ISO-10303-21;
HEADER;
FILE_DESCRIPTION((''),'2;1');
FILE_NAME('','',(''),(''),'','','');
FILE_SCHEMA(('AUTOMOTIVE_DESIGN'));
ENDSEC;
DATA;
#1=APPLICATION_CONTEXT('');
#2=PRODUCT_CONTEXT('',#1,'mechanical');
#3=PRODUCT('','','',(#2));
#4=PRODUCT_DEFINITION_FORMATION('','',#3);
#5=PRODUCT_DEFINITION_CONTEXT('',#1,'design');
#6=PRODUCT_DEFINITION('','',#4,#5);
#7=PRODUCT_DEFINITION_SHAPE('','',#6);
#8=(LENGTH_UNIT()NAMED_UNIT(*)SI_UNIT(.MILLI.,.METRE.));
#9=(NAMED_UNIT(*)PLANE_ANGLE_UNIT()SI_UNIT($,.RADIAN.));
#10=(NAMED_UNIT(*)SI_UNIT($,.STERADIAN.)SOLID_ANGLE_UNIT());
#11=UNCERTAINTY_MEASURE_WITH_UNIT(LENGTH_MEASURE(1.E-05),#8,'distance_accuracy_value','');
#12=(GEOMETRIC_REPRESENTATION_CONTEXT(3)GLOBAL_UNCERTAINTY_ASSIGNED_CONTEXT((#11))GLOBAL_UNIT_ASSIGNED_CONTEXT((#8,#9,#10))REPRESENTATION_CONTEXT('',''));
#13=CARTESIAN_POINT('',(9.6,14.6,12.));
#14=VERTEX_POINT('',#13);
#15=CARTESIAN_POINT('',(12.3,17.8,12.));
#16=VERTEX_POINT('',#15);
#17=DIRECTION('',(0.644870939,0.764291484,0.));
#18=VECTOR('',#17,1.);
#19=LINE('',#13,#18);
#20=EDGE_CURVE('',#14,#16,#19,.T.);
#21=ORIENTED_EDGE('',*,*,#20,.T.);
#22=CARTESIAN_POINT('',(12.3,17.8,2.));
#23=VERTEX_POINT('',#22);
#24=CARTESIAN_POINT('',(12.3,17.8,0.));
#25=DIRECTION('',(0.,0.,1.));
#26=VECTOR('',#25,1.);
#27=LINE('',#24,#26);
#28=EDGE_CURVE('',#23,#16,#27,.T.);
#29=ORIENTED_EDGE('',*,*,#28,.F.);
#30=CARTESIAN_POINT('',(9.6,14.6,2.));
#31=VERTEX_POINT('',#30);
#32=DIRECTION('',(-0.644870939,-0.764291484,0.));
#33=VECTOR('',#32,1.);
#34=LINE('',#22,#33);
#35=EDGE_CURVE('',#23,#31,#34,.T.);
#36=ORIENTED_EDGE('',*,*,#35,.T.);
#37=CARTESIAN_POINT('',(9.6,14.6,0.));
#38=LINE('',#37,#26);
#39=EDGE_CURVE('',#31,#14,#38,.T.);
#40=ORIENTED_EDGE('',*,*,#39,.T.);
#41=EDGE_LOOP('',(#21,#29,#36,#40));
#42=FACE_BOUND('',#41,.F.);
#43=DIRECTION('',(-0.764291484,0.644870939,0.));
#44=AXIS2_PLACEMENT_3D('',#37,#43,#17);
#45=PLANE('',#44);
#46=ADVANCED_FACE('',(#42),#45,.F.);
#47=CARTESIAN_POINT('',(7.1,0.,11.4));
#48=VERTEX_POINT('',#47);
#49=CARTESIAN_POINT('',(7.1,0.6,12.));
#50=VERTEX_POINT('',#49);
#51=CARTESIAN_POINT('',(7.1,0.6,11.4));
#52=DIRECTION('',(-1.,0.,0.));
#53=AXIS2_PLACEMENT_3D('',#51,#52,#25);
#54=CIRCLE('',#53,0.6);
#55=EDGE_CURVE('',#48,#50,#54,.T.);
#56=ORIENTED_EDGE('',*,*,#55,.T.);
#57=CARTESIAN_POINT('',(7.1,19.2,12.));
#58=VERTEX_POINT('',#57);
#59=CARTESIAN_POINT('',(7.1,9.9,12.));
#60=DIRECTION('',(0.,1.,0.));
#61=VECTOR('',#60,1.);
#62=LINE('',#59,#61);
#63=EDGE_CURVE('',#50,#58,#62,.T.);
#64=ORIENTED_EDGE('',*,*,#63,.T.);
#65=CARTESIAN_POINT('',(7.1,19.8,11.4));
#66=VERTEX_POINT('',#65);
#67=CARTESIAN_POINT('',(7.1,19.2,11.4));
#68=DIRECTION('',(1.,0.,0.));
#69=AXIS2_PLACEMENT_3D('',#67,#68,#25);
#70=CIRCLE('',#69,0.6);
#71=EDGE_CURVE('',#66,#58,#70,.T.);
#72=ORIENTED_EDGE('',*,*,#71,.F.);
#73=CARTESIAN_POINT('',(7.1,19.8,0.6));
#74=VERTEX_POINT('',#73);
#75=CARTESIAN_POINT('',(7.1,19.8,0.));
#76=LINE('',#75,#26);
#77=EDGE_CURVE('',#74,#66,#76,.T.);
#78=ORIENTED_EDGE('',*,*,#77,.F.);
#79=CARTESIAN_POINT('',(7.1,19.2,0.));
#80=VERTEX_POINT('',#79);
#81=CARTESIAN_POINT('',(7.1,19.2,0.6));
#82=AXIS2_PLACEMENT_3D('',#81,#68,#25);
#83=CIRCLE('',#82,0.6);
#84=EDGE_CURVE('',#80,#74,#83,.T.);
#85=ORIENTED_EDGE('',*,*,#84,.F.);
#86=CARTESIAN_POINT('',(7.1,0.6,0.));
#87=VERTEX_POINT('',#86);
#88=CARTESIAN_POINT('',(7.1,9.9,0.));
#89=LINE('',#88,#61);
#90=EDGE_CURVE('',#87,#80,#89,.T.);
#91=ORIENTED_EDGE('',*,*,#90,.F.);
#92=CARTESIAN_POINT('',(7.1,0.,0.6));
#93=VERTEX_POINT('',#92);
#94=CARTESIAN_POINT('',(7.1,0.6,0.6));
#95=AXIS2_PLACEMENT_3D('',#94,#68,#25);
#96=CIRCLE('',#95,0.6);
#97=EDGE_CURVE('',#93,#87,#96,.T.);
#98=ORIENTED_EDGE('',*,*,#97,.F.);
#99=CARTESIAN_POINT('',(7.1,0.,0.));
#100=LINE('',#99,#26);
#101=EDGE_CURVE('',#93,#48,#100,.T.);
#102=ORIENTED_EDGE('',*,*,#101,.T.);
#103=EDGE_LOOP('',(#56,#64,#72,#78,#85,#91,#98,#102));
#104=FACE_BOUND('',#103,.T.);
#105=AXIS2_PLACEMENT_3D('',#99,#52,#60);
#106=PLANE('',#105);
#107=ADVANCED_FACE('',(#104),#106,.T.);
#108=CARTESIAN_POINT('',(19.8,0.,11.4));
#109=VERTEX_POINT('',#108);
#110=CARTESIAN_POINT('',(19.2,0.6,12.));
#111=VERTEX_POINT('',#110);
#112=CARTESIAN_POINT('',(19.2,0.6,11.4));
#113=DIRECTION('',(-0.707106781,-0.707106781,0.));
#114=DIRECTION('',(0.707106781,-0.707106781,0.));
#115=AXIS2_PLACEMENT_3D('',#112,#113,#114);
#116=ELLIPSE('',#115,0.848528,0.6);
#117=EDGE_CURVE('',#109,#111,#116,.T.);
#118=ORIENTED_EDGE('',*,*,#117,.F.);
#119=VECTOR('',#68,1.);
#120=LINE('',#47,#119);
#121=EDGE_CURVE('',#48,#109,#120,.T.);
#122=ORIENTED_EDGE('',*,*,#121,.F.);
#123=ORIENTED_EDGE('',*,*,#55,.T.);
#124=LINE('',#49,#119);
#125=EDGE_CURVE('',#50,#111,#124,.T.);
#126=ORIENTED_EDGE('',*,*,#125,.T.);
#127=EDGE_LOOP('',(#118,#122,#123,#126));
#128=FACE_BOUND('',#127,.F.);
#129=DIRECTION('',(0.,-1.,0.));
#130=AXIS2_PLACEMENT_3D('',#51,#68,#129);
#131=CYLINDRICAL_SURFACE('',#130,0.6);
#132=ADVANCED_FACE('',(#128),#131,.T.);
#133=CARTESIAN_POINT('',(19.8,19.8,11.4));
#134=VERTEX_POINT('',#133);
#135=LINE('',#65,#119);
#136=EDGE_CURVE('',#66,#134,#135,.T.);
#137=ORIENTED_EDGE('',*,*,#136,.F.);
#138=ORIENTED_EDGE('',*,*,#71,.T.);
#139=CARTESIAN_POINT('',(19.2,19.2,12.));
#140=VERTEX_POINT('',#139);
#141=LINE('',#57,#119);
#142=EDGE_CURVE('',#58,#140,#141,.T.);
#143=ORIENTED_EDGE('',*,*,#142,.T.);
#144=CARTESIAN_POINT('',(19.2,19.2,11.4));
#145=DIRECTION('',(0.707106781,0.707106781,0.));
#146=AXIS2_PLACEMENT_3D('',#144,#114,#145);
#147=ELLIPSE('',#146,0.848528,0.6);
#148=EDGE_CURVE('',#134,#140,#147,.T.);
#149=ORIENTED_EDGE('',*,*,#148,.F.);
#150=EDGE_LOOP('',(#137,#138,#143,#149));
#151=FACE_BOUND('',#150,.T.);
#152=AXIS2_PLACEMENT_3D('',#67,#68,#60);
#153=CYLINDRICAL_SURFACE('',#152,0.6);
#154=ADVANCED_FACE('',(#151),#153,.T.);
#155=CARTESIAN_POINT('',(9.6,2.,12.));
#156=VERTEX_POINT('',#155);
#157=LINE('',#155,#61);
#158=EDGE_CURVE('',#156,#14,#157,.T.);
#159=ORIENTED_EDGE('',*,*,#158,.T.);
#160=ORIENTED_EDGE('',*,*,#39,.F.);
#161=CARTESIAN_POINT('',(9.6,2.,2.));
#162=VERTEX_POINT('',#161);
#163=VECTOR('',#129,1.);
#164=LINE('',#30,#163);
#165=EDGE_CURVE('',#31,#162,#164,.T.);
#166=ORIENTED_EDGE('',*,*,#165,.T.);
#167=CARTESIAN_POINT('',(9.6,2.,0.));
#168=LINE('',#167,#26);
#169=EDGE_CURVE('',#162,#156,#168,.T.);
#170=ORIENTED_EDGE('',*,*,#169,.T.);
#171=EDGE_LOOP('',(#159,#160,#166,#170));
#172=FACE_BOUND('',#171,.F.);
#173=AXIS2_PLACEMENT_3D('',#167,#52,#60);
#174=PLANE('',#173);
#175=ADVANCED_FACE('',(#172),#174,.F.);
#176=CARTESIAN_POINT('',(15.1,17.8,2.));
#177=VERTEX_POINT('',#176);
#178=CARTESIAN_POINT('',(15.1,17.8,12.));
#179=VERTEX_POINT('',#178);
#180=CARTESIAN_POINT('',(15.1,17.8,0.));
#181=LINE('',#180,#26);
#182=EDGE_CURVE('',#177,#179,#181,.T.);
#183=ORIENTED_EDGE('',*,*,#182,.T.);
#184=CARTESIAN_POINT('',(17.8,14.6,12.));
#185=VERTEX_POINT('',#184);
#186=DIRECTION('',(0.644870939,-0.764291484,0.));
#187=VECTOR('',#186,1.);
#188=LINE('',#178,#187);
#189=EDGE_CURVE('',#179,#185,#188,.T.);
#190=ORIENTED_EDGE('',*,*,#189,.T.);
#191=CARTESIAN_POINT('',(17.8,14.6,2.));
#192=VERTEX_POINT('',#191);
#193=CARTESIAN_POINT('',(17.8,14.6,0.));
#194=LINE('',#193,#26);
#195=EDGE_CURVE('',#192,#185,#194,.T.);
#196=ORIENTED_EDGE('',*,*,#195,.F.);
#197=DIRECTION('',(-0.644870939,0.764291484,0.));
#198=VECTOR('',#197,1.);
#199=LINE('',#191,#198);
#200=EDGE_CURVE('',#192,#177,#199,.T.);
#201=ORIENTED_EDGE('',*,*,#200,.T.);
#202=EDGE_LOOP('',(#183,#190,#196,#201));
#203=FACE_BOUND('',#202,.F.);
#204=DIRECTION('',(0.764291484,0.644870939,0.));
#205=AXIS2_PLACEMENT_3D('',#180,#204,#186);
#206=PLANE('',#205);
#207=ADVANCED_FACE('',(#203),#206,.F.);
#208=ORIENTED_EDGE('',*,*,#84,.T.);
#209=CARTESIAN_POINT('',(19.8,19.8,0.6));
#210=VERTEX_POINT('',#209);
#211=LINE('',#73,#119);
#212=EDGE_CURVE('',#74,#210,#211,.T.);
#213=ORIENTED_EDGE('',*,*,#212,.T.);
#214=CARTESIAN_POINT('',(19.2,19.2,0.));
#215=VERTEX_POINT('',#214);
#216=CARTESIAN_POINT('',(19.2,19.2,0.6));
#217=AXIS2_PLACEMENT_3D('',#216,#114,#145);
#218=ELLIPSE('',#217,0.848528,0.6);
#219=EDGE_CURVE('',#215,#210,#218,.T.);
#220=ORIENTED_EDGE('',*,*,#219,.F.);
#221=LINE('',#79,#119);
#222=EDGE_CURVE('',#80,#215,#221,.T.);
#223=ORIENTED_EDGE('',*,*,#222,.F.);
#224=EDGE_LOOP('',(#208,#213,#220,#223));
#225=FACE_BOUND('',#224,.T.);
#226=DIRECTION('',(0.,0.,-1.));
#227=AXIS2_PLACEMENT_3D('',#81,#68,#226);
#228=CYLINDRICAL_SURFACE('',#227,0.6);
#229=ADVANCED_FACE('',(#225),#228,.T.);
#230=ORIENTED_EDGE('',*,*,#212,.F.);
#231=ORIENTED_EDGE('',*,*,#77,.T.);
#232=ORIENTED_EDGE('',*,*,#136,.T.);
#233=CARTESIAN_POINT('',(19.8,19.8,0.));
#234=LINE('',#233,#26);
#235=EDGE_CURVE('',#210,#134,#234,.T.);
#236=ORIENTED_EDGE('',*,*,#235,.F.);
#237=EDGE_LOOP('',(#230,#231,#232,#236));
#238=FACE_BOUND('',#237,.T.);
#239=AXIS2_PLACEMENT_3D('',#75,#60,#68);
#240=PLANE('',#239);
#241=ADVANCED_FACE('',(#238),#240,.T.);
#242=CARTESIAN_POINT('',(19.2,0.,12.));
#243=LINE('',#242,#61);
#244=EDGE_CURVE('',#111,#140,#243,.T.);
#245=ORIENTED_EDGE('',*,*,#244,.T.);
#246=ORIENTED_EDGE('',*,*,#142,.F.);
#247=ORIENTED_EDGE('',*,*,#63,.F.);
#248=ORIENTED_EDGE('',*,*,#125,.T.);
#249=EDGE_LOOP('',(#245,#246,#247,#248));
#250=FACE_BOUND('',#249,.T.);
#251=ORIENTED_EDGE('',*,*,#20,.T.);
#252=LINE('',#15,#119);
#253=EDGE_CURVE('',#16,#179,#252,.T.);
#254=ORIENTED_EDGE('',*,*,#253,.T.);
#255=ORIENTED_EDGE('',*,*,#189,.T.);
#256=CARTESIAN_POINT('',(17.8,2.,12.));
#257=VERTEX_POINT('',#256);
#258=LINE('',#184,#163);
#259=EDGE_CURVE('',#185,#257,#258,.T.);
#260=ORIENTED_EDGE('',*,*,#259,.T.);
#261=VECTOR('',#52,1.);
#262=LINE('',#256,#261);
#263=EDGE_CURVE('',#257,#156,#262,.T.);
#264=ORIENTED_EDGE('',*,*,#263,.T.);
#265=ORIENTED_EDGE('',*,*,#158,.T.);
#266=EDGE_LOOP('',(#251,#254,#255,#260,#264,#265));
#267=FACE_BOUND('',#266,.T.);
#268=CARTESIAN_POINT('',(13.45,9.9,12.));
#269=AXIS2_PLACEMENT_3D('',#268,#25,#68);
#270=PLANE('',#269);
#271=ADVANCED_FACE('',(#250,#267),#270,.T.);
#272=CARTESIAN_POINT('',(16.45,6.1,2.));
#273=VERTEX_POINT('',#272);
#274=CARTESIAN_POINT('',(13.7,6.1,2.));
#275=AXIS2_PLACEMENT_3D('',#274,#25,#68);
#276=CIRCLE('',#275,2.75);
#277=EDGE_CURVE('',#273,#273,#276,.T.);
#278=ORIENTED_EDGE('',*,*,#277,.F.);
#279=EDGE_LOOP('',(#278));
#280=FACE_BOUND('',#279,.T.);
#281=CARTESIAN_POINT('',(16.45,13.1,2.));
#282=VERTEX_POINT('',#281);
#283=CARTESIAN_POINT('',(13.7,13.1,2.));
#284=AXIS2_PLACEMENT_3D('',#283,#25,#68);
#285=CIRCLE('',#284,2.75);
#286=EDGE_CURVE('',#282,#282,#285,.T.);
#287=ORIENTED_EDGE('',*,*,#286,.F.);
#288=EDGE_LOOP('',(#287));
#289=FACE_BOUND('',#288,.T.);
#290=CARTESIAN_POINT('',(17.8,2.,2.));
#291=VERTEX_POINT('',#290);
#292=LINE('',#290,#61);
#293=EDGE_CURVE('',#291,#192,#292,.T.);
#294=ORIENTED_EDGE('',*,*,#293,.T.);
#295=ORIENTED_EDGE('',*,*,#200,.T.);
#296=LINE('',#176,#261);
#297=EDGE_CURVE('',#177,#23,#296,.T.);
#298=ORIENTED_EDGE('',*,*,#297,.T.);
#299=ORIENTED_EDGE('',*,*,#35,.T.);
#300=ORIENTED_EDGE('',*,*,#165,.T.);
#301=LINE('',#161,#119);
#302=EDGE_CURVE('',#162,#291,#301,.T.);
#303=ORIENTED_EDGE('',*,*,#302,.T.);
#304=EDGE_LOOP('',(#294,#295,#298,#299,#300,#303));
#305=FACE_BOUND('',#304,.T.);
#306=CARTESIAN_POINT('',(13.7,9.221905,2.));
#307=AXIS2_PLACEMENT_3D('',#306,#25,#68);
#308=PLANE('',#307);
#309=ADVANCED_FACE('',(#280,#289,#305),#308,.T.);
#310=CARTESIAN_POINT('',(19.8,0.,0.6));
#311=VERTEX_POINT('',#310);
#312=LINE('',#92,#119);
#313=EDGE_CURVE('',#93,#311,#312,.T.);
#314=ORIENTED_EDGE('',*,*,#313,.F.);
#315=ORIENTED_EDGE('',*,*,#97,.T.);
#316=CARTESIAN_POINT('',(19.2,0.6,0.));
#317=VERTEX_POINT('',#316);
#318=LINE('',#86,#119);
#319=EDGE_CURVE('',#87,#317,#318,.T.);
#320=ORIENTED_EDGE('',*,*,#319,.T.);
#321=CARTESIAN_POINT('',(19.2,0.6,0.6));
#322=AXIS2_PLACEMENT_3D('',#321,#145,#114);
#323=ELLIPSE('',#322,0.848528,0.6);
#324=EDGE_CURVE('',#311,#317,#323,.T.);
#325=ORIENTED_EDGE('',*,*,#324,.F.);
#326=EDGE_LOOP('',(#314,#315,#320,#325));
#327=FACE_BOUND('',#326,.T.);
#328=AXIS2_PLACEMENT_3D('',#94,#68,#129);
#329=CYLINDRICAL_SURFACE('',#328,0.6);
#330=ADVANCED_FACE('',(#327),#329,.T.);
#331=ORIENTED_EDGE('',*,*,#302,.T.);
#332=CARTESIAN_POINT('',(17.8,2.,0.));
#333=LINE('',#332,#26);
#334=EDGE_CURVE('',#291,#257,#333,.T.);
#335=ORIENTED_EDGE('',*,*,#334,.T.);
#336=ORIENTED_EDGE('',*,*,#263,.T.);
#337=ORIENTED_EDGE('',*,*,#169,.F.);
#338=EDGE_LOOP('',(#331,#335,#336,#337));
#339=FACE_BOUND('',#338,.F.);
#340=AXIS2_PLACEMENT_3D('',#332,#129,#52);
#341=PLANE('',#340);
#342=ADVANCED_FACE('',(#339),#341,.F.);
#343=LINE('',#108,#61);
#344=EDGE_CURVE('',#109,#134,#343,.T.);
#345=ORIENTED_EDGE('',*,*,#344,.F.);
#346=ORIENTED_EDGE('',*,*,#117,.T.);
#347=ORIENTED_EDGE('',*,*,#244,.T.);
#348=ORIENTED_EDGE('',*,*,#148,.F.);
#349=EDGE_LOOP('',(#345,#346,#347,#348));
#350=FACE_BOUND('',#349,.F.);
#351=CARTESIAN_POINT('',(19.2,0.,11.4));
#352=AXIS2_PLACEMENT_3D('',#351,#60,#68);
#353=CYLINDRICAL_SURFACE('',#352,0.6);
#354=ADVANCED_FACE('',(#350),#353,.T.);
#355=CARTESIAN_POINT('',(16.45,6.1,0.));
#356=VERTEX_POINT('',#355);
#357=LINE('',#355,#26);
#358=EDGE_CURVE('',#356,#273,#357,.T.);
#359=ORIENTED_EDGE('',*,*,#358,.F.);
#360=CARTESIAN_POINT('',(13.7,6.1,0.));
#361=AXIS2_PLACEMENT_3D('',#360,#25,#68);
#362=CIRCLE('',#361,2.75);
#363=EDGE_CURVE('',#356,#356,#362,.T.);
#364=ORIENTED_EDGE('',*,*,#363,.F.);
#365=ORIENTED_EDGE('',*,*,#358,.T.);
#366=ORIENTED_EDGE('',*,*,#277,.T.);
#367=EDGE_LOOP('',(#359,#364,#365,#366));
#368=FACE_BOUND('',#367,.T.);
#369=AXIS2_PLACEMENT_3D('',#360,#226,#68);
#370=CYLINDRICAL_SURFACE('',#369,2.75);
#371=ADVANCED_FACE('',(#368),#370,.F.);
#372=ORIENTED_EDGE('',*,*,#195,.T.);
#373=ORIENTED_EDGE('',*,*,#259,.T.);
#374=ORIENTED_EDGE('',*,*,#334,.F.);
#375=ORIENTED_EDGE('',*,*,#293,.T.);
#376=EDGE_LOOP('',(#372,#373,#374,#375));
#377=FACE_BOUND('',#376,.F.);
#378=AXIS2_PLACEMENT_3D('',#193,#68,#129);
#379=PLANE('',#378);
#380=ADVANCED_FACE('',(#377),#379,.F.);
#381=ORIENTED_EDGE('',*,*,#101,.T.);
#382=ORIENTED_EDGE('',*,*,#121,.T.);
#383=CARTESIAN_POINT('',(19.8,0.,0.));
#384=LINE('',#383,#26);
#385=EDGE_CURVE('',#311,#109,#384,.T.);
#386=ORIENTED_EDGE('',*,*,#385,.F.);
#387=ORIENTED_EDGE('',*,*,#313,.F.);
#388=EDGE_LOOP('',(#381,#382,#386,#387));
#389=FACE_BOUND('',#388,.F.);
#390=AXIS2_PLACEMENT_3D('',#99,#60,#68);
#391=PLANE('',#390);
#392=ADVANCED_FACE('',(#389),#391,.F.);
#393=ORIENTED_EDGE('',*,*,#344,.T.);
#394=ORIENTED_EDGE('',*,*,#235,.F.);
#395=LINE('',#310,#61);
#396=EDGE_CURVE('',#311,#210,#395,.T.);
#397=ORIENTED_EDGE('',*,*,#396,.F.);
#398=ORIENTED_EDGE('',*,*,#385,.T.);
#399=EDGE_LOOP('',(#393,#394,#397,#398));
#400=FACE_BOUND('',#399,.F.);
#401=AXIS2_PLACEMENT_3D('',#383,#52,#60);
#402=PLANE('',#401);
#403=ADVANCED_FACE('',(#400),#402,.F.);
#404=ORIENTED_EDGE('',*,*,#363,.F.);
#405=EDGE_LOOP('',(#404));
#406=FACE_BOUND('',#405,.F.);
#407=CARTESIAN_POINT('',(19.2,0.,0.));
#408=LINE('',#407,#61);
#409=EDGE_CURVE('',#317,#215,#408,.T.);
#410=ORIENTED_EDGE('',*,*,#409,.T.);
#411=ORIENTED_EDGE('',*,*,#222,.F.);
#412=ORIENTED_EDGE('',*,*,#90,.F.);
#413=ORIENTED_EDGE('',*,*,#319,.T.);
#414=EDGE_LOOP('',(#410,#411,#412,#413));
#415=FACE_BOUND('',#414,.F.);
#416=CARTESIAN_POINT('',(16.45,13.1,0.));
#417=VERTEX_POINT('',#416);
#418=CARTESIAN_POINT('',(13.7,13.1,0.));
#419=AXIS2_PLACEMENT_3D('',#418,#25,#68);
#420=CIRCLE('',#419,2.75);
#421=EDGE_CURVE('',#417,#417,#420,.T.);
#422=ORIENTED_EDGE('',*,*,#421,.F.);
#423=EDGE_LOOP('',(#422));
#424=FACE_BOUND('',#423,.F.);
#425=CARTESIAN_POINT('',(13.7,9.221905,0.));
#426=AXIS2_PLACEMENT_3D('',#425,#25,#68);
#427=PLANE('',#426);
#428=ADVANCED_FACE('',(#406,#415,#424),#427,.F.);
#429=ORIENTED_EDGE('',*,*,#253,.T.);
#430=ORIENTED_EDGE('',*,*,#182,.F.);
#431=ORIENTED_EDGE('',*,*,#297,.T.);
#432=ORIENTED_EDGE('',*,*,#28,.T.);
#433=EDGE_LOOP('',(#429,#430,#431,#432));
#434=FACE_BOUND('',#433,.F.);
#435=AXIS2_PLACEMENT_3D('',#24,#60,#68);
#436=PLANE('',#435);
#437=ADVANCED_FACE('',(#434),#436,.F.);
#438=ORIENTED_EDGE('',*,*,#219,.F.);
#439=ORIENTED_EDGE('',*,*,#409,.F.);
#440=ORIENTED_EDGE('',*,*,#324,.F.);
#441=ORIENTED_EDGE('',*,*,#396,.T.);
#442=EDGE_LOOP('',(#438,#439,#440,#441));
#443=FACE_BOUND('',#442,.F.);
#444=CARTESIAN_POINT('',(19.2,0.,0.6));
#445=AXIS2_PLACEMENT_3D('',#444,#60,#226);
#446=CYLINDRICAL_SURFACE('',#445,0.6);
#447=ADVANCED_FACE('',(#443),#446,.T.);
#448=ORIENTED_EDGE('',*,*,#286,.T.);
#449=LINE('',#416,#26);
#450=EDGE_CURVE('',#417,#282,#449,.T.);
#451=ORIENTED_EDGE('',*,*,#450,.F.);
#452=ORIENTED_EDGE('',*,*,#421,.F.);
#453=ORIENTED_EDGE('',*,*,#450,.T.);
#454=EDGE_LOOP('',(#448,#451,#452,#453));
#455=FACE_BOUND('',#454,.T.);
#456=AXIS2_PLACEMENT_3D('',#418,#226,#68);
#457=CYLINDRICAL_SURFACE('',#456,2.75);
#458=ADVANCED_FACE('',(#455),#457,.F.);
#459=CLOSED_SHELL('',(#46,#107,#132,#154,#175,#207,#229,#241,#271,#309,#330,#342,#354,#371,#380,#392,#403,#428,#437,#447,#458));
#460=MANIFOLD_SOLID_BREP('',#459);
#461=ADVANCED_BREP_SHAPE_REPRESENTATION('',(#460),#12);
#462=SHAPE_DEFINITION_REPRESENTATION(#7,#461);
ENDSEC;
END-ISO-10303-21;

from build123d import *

# Parameters (mm, degrees)
F0_W     = 12.7
F0_H     = 19.8
F1_DEPTH = 12
F0_R     = 2.75
F2_DEPTH = 2
F3_R     = 0.6
F4_R     = 0.6


# Not quite as in the source:
# - a feature names something its author has since deleted; it is built from what else it names


with BuildPart() as f1:
    # F0 (on Top) → F1 (new body)
    with BuildSketch(Plane.XY):
        with Locations((13.45, 9.9)):
            Rectangle(F0_W, F0_H)
        Polygon((17.8, 14.6), (17.8, 2), (9.6, 2), (9.6, 14.6), (12.3, 17.8), (15.1, 17.8), align=None, mode=Mode.SUBTRACT)
    extrude(amount=F1_DEPTH)

    # F0 (on Top) → F2 (join)
    with BuildSketch(Plane.XY):
        Polygon((9.6, 2), (17.8, 2), (17.8, 14.6), (15.1, 17.8), (12.3, 17.8), (9.6, 14.6), align=None)
        with Locations((13.7, 6.1)):
            Circle(F0_R, mode=Mode.SUBTRACT)
        with Locations((13.7, 13.1)):
            Circle(F0_R, mode=Mode.SUBTRACT)
    extrude(amount=F2_DEPTH)

    # F3
    f3_edges = [f1.edges().sort_by_distance(p)[0] for p in [
        (13.45, 0, 12),
        (19.8, 9.9, 12),
        (13.45, 19.8, 12),
    ]]
    fillet(f3_edges, radius=F3_R)

    # F4
    f4_edges = [f1.edges().sort_by_distance(p)[0] for p in [
        (13.45, 0, 0),
        (19.8, 9.9, 0),
        (13.45, 19.8, 0),
    ]]
    fillet(f4_edges, radius=F4_R)


solid = f1.part
